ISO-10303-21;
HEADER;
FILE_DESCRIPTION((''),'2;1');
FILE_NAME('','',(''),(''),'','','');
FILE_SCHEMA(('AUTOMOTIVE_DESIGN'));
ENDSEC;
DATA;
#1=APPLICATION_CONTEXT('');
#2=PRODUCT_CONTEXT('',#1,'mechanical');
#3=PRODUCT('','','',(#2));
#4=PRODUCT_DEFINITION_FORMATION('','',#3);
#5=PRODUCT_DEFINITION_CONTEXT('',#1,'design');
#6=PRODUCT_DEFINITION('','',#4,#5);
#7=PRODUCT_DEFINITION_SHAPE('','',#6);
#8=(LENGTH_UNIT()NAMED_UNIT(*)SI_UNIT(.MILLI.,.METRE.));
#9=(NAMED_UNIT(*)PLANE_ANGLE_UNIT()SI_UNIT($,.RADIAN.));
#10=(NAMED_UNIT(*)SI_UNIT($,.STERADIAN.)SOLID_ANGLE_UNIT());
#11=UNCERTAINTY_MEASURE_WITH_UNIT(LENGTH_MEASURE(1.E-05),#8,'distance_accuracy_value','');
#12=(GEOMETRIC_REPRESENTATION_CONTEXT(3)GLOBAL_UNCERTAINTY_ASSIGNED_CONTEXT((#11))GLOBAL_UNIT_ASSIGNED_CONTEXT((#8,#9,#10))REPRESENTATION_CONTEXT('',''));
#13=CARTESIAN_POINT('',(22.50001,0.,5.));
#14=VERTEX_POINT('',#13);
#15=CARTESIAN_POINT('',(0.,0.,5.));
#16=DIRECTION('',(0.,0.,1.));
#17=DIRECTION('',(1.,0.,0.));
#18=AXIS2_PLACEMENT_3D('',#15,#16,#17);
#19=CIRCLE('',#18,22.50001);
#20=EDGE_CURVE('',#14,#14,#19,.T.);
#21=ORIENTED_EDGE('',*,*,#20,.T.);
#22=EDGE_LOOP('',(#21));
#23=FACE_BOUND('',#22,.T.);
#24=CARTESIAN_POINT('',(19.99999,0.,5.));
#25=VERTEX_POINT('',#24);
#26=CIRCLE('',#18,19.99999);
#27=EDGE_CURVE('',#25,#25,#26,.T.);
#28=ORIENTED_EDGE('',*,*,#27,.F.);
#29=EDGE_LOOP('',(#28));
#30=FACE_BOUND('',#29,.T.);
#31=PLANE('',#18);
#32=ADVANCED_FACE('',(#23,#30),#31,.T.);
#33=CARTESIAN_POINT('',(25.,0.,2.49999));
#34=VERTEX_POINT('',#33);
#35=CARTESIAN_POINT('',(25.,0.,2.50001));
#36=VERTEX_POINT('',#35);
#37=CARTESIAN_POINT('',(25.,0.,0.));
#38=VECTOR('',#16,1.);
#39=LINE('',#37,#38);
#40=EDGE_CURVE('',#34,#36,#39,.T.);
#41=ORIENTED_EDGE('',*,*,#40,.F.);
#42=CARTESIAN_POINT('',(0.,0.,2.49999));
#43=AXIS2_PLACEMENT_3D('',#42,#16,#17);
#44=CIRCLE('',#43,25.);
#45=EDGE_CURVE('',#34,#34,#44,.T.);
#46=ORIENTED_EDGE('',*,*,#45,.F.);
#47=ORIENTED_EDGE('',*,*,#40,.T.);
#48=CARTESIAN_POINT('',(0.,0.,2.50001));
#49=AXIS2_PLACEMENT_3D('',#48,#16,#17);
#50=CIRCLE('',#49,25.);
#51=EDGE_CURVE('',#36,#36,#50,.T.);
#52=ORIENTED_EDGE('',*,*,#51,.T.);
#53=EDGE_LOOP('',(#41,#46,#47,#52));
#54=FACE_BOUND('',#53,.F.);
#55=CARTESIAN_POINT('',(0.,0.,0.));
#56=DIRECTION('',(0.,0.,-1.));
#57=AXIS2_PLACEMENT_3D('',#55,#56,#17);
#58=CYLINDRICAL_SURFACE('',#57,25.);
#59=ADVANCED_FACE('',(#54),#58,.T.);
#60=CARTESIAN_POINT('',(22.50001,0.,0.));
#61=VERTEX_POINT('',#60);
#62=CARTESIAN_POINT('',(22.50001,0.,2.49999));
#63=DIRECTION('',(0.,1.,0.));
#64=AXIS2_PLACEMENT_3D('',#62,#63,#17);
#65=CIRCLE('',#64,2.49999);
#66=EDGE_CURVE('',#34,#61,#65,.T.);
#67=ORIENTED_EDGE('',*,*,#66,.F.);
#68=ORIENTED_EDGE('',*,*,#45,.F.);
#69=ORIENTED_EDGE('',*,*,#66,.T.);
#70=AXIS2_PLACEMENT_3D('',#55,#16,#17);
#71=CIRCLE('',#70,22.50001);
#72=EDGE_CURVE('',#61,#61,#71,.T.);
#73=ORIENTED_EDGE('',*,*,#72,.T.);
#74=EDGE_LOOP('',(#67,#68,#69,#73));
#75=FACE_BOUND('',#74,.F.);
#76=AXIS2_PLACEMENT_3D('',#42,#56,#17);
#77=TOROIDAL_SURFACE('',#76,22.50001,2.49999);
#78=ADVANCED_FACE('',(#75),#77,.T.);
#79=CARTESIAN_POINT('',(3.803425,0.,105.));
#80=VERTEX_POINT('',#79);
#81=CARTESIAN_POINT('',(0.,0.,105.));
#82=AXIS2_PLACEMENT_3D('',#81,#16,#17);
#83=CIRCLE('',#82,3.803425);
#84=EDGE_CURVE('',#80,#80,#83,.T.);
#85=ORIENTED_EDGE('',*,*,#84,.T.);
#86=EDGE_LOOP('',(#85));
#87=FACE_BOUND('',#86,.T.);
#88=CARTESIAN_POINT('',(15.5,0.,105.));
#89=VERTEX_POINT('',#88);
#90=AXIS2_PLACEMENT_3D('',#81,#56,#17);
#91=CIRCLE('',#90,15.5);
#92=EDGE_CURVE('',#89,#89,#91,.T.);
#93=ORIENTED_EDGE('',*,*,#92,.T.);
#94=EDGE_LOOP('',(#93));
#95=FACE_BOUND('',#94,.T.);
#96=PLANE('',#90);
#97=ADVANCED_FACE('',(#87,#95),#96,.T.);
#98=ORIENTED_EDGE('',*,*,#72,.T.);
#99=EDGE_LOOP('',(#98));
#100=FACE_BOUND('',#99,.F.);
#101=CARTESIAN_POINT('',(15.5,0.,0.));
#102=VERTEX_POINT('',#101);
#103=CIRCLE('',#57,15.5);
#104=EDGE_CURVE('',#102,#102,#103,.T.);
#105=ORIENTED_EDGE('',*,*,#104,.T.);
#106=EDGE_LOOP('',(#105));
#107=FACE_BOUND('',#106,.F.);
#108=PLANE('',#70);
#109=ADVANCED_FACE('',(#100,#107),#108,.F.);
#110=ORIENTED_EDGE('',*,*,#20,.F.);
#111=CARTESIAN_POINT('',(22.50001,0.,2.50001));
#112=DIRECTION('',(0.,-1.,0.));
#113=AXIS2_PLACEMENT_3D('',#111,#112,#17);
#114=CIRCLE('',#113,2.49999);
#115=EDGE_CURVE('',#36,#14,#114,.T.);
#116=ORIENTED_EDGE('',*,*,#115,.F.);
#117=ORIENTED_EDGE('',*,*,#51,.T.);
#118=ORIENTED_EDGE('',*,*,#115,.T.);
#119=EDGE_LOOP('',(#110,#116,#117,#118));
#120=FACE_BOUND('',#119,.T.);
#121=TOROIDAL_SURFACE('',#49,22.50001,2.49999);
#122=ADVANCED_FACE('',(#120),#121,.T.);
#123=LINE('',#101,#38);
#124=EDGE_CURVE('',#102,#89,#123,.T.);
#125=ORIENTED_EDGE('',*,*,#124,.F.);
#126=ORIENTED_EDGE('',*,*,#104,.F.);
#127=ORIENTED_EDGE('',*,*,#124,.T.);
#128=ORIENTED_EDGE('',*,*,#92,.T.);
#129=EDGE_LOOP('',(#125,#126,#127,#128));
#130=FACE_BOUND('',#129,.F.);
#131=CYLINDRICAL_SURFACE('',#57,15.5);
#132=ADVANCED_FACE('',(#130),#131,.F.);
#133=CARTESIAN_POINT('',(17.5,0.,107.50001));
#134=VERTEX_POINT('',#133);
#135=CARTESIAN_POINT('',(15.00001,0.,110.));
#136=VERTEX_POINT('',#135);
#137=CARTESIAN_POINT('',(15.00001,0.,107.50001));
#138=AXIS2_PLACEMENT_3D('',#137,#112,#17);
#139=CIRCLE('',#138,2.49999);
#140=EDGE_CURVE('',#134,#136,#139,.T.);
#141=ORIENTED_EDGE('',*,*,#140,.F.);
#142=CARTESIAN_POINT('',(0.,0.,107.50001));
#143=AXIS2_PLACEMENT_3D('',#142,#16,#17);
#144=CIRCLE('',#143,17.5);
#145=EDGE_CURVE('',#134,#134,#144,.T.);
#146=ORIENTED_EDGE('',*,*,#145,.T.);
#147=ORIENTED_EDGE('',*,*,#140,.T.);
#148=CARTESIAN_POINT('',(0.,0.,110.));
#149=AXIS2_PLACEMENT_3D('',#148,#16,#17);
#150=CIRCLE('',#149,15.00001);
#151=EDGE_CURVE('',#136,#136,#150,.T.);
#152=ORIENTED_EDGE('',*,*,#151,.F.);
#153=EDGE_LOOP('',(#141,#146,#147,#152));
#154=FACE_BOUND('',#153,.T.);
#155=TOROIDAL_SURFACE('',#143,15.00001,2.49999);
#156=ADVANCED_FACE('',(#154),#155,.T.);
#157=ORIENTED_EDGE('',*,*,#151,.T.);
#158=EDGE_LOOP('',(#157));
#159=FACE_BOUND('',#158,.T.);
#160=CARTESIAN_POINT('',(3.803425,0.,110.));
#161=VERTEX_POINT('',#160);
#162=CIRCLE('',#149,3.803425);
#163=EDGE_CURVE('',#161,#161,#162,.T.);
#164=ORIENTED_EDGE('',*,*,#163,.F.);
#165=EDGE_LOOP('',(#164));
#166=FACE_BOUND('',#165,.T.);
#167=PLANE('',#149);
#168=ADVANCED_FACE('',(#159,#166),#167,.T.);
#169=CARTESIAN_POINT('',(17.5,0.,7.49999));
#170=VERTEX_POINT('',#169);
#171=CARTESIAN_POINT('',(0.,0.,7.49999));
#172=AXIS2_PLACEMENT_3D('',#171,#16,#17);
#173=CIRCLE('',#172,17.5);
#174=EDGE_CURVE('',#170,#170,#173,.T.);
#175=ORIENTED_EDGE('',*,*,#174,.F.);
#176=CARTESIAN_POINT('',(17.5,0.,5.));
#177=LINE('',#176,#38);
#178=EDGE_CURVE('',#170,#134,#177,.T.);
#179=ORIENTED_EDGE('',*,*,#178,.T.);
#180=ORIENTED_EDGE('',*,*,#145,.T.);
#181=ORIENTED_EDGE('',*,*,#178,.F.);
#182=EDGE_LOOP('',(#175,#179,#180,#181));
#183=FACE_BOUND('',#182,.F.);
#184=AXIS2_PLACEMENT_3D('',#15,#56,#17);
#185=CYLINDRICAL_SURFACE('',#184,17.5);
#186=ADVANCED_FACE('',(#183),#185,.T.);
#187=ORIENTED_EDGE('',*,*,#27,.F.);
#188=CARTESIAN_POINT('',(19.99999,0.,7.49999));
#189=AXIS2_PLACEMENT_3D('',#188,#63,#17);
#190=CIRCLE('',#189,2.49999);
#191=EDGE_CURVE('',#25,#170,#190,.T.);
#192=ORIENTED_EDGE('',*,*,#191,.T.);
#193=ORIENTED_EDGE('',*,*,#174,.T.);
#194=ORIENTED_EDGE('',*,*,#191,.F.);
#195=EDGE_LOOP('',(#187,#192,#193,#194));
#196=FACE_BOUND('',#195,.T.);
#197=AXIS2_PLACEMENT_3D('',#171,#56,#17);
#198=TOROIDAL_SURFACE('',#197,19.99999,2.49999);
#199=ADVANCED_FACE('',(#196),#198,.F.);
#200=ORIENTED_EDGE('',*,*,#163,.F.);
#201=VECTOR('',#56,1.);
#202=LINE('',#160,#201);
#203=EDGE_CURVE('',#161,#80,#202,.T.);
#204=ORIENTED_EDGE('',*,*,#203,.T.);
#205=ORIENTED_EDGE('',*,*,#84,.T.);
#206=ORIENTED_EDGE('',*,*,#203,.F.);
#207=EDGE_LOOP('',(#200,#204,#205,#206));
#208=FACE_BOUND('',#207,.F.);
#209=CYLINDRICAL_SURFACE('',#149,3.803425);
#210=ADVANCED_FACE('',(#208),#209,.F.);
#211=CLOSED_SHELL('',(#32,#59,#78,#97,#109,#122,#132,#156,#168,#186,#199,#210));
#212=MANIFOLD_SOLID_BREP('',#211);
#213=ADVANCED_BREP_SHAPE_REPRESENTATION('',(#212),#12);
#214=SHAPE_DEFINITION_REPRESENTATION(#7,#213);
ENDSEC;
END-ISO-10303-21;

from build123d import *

# Parameters (mm, degrees)
F0_R     = 25
F1_DEPTH = 5
F2_R     = 17.5
F3_DEPTH = 105
F4_R     = 15.5
F5_DEPTH = 105
F6_R     = 2.49999
F7_R     = 3.8034251557
F8_DEPTH = 30


# Not quite as in the source:
# - a fillet or chamfer is up to 0.001 mm smaller than in the source, because OpenCascade refuses the exact size


with BuildPart() as f1:
    # F0 (on Top) → F1 (new body)
    with BuildSketch(Plane.XY):
        Circle(F0_R)
    extrude(amount=F1_DEPTH)

    # F2 (on face) → F3 (join)
    with BuildSketch(Plane.XY.offset(5)):
        Circle(F2_R)
    extrude(amount=F3_DEPTH)

    # F4 (on face) → F5 (cut)
    with BuildSketch(Plane(origin=(0, 0, 0), x_dir=(1, 0, 0), z_dir=(0, 0, -1))):
        Circle(F4_R)
    extrude(amount=-F5_DEPTH, mode=Mode.SUBTRACT)

    # F6 (radius 2.5 in the source; OpenCascade refuses exactly that, so slightly less here)
    f6_edges = [f1.edges().sort_by_distance(p)[0] for p in [
        (-17.5, 0, 110),
        (-17.5, 0, 5),
        (-25, 0, 5),
        (-25, 0, 0),
    ]]
    fillet(f6_edges, radius=F6_R)

    # F7 (on face) → F8 (cut)
    with BuildSketch(Plane.XY.offset(110)):
        Circle(F7_R)
    extrude(amount=-F8_DEPTH, mode=Mode.SUBTRACT)


solid = f1.part
